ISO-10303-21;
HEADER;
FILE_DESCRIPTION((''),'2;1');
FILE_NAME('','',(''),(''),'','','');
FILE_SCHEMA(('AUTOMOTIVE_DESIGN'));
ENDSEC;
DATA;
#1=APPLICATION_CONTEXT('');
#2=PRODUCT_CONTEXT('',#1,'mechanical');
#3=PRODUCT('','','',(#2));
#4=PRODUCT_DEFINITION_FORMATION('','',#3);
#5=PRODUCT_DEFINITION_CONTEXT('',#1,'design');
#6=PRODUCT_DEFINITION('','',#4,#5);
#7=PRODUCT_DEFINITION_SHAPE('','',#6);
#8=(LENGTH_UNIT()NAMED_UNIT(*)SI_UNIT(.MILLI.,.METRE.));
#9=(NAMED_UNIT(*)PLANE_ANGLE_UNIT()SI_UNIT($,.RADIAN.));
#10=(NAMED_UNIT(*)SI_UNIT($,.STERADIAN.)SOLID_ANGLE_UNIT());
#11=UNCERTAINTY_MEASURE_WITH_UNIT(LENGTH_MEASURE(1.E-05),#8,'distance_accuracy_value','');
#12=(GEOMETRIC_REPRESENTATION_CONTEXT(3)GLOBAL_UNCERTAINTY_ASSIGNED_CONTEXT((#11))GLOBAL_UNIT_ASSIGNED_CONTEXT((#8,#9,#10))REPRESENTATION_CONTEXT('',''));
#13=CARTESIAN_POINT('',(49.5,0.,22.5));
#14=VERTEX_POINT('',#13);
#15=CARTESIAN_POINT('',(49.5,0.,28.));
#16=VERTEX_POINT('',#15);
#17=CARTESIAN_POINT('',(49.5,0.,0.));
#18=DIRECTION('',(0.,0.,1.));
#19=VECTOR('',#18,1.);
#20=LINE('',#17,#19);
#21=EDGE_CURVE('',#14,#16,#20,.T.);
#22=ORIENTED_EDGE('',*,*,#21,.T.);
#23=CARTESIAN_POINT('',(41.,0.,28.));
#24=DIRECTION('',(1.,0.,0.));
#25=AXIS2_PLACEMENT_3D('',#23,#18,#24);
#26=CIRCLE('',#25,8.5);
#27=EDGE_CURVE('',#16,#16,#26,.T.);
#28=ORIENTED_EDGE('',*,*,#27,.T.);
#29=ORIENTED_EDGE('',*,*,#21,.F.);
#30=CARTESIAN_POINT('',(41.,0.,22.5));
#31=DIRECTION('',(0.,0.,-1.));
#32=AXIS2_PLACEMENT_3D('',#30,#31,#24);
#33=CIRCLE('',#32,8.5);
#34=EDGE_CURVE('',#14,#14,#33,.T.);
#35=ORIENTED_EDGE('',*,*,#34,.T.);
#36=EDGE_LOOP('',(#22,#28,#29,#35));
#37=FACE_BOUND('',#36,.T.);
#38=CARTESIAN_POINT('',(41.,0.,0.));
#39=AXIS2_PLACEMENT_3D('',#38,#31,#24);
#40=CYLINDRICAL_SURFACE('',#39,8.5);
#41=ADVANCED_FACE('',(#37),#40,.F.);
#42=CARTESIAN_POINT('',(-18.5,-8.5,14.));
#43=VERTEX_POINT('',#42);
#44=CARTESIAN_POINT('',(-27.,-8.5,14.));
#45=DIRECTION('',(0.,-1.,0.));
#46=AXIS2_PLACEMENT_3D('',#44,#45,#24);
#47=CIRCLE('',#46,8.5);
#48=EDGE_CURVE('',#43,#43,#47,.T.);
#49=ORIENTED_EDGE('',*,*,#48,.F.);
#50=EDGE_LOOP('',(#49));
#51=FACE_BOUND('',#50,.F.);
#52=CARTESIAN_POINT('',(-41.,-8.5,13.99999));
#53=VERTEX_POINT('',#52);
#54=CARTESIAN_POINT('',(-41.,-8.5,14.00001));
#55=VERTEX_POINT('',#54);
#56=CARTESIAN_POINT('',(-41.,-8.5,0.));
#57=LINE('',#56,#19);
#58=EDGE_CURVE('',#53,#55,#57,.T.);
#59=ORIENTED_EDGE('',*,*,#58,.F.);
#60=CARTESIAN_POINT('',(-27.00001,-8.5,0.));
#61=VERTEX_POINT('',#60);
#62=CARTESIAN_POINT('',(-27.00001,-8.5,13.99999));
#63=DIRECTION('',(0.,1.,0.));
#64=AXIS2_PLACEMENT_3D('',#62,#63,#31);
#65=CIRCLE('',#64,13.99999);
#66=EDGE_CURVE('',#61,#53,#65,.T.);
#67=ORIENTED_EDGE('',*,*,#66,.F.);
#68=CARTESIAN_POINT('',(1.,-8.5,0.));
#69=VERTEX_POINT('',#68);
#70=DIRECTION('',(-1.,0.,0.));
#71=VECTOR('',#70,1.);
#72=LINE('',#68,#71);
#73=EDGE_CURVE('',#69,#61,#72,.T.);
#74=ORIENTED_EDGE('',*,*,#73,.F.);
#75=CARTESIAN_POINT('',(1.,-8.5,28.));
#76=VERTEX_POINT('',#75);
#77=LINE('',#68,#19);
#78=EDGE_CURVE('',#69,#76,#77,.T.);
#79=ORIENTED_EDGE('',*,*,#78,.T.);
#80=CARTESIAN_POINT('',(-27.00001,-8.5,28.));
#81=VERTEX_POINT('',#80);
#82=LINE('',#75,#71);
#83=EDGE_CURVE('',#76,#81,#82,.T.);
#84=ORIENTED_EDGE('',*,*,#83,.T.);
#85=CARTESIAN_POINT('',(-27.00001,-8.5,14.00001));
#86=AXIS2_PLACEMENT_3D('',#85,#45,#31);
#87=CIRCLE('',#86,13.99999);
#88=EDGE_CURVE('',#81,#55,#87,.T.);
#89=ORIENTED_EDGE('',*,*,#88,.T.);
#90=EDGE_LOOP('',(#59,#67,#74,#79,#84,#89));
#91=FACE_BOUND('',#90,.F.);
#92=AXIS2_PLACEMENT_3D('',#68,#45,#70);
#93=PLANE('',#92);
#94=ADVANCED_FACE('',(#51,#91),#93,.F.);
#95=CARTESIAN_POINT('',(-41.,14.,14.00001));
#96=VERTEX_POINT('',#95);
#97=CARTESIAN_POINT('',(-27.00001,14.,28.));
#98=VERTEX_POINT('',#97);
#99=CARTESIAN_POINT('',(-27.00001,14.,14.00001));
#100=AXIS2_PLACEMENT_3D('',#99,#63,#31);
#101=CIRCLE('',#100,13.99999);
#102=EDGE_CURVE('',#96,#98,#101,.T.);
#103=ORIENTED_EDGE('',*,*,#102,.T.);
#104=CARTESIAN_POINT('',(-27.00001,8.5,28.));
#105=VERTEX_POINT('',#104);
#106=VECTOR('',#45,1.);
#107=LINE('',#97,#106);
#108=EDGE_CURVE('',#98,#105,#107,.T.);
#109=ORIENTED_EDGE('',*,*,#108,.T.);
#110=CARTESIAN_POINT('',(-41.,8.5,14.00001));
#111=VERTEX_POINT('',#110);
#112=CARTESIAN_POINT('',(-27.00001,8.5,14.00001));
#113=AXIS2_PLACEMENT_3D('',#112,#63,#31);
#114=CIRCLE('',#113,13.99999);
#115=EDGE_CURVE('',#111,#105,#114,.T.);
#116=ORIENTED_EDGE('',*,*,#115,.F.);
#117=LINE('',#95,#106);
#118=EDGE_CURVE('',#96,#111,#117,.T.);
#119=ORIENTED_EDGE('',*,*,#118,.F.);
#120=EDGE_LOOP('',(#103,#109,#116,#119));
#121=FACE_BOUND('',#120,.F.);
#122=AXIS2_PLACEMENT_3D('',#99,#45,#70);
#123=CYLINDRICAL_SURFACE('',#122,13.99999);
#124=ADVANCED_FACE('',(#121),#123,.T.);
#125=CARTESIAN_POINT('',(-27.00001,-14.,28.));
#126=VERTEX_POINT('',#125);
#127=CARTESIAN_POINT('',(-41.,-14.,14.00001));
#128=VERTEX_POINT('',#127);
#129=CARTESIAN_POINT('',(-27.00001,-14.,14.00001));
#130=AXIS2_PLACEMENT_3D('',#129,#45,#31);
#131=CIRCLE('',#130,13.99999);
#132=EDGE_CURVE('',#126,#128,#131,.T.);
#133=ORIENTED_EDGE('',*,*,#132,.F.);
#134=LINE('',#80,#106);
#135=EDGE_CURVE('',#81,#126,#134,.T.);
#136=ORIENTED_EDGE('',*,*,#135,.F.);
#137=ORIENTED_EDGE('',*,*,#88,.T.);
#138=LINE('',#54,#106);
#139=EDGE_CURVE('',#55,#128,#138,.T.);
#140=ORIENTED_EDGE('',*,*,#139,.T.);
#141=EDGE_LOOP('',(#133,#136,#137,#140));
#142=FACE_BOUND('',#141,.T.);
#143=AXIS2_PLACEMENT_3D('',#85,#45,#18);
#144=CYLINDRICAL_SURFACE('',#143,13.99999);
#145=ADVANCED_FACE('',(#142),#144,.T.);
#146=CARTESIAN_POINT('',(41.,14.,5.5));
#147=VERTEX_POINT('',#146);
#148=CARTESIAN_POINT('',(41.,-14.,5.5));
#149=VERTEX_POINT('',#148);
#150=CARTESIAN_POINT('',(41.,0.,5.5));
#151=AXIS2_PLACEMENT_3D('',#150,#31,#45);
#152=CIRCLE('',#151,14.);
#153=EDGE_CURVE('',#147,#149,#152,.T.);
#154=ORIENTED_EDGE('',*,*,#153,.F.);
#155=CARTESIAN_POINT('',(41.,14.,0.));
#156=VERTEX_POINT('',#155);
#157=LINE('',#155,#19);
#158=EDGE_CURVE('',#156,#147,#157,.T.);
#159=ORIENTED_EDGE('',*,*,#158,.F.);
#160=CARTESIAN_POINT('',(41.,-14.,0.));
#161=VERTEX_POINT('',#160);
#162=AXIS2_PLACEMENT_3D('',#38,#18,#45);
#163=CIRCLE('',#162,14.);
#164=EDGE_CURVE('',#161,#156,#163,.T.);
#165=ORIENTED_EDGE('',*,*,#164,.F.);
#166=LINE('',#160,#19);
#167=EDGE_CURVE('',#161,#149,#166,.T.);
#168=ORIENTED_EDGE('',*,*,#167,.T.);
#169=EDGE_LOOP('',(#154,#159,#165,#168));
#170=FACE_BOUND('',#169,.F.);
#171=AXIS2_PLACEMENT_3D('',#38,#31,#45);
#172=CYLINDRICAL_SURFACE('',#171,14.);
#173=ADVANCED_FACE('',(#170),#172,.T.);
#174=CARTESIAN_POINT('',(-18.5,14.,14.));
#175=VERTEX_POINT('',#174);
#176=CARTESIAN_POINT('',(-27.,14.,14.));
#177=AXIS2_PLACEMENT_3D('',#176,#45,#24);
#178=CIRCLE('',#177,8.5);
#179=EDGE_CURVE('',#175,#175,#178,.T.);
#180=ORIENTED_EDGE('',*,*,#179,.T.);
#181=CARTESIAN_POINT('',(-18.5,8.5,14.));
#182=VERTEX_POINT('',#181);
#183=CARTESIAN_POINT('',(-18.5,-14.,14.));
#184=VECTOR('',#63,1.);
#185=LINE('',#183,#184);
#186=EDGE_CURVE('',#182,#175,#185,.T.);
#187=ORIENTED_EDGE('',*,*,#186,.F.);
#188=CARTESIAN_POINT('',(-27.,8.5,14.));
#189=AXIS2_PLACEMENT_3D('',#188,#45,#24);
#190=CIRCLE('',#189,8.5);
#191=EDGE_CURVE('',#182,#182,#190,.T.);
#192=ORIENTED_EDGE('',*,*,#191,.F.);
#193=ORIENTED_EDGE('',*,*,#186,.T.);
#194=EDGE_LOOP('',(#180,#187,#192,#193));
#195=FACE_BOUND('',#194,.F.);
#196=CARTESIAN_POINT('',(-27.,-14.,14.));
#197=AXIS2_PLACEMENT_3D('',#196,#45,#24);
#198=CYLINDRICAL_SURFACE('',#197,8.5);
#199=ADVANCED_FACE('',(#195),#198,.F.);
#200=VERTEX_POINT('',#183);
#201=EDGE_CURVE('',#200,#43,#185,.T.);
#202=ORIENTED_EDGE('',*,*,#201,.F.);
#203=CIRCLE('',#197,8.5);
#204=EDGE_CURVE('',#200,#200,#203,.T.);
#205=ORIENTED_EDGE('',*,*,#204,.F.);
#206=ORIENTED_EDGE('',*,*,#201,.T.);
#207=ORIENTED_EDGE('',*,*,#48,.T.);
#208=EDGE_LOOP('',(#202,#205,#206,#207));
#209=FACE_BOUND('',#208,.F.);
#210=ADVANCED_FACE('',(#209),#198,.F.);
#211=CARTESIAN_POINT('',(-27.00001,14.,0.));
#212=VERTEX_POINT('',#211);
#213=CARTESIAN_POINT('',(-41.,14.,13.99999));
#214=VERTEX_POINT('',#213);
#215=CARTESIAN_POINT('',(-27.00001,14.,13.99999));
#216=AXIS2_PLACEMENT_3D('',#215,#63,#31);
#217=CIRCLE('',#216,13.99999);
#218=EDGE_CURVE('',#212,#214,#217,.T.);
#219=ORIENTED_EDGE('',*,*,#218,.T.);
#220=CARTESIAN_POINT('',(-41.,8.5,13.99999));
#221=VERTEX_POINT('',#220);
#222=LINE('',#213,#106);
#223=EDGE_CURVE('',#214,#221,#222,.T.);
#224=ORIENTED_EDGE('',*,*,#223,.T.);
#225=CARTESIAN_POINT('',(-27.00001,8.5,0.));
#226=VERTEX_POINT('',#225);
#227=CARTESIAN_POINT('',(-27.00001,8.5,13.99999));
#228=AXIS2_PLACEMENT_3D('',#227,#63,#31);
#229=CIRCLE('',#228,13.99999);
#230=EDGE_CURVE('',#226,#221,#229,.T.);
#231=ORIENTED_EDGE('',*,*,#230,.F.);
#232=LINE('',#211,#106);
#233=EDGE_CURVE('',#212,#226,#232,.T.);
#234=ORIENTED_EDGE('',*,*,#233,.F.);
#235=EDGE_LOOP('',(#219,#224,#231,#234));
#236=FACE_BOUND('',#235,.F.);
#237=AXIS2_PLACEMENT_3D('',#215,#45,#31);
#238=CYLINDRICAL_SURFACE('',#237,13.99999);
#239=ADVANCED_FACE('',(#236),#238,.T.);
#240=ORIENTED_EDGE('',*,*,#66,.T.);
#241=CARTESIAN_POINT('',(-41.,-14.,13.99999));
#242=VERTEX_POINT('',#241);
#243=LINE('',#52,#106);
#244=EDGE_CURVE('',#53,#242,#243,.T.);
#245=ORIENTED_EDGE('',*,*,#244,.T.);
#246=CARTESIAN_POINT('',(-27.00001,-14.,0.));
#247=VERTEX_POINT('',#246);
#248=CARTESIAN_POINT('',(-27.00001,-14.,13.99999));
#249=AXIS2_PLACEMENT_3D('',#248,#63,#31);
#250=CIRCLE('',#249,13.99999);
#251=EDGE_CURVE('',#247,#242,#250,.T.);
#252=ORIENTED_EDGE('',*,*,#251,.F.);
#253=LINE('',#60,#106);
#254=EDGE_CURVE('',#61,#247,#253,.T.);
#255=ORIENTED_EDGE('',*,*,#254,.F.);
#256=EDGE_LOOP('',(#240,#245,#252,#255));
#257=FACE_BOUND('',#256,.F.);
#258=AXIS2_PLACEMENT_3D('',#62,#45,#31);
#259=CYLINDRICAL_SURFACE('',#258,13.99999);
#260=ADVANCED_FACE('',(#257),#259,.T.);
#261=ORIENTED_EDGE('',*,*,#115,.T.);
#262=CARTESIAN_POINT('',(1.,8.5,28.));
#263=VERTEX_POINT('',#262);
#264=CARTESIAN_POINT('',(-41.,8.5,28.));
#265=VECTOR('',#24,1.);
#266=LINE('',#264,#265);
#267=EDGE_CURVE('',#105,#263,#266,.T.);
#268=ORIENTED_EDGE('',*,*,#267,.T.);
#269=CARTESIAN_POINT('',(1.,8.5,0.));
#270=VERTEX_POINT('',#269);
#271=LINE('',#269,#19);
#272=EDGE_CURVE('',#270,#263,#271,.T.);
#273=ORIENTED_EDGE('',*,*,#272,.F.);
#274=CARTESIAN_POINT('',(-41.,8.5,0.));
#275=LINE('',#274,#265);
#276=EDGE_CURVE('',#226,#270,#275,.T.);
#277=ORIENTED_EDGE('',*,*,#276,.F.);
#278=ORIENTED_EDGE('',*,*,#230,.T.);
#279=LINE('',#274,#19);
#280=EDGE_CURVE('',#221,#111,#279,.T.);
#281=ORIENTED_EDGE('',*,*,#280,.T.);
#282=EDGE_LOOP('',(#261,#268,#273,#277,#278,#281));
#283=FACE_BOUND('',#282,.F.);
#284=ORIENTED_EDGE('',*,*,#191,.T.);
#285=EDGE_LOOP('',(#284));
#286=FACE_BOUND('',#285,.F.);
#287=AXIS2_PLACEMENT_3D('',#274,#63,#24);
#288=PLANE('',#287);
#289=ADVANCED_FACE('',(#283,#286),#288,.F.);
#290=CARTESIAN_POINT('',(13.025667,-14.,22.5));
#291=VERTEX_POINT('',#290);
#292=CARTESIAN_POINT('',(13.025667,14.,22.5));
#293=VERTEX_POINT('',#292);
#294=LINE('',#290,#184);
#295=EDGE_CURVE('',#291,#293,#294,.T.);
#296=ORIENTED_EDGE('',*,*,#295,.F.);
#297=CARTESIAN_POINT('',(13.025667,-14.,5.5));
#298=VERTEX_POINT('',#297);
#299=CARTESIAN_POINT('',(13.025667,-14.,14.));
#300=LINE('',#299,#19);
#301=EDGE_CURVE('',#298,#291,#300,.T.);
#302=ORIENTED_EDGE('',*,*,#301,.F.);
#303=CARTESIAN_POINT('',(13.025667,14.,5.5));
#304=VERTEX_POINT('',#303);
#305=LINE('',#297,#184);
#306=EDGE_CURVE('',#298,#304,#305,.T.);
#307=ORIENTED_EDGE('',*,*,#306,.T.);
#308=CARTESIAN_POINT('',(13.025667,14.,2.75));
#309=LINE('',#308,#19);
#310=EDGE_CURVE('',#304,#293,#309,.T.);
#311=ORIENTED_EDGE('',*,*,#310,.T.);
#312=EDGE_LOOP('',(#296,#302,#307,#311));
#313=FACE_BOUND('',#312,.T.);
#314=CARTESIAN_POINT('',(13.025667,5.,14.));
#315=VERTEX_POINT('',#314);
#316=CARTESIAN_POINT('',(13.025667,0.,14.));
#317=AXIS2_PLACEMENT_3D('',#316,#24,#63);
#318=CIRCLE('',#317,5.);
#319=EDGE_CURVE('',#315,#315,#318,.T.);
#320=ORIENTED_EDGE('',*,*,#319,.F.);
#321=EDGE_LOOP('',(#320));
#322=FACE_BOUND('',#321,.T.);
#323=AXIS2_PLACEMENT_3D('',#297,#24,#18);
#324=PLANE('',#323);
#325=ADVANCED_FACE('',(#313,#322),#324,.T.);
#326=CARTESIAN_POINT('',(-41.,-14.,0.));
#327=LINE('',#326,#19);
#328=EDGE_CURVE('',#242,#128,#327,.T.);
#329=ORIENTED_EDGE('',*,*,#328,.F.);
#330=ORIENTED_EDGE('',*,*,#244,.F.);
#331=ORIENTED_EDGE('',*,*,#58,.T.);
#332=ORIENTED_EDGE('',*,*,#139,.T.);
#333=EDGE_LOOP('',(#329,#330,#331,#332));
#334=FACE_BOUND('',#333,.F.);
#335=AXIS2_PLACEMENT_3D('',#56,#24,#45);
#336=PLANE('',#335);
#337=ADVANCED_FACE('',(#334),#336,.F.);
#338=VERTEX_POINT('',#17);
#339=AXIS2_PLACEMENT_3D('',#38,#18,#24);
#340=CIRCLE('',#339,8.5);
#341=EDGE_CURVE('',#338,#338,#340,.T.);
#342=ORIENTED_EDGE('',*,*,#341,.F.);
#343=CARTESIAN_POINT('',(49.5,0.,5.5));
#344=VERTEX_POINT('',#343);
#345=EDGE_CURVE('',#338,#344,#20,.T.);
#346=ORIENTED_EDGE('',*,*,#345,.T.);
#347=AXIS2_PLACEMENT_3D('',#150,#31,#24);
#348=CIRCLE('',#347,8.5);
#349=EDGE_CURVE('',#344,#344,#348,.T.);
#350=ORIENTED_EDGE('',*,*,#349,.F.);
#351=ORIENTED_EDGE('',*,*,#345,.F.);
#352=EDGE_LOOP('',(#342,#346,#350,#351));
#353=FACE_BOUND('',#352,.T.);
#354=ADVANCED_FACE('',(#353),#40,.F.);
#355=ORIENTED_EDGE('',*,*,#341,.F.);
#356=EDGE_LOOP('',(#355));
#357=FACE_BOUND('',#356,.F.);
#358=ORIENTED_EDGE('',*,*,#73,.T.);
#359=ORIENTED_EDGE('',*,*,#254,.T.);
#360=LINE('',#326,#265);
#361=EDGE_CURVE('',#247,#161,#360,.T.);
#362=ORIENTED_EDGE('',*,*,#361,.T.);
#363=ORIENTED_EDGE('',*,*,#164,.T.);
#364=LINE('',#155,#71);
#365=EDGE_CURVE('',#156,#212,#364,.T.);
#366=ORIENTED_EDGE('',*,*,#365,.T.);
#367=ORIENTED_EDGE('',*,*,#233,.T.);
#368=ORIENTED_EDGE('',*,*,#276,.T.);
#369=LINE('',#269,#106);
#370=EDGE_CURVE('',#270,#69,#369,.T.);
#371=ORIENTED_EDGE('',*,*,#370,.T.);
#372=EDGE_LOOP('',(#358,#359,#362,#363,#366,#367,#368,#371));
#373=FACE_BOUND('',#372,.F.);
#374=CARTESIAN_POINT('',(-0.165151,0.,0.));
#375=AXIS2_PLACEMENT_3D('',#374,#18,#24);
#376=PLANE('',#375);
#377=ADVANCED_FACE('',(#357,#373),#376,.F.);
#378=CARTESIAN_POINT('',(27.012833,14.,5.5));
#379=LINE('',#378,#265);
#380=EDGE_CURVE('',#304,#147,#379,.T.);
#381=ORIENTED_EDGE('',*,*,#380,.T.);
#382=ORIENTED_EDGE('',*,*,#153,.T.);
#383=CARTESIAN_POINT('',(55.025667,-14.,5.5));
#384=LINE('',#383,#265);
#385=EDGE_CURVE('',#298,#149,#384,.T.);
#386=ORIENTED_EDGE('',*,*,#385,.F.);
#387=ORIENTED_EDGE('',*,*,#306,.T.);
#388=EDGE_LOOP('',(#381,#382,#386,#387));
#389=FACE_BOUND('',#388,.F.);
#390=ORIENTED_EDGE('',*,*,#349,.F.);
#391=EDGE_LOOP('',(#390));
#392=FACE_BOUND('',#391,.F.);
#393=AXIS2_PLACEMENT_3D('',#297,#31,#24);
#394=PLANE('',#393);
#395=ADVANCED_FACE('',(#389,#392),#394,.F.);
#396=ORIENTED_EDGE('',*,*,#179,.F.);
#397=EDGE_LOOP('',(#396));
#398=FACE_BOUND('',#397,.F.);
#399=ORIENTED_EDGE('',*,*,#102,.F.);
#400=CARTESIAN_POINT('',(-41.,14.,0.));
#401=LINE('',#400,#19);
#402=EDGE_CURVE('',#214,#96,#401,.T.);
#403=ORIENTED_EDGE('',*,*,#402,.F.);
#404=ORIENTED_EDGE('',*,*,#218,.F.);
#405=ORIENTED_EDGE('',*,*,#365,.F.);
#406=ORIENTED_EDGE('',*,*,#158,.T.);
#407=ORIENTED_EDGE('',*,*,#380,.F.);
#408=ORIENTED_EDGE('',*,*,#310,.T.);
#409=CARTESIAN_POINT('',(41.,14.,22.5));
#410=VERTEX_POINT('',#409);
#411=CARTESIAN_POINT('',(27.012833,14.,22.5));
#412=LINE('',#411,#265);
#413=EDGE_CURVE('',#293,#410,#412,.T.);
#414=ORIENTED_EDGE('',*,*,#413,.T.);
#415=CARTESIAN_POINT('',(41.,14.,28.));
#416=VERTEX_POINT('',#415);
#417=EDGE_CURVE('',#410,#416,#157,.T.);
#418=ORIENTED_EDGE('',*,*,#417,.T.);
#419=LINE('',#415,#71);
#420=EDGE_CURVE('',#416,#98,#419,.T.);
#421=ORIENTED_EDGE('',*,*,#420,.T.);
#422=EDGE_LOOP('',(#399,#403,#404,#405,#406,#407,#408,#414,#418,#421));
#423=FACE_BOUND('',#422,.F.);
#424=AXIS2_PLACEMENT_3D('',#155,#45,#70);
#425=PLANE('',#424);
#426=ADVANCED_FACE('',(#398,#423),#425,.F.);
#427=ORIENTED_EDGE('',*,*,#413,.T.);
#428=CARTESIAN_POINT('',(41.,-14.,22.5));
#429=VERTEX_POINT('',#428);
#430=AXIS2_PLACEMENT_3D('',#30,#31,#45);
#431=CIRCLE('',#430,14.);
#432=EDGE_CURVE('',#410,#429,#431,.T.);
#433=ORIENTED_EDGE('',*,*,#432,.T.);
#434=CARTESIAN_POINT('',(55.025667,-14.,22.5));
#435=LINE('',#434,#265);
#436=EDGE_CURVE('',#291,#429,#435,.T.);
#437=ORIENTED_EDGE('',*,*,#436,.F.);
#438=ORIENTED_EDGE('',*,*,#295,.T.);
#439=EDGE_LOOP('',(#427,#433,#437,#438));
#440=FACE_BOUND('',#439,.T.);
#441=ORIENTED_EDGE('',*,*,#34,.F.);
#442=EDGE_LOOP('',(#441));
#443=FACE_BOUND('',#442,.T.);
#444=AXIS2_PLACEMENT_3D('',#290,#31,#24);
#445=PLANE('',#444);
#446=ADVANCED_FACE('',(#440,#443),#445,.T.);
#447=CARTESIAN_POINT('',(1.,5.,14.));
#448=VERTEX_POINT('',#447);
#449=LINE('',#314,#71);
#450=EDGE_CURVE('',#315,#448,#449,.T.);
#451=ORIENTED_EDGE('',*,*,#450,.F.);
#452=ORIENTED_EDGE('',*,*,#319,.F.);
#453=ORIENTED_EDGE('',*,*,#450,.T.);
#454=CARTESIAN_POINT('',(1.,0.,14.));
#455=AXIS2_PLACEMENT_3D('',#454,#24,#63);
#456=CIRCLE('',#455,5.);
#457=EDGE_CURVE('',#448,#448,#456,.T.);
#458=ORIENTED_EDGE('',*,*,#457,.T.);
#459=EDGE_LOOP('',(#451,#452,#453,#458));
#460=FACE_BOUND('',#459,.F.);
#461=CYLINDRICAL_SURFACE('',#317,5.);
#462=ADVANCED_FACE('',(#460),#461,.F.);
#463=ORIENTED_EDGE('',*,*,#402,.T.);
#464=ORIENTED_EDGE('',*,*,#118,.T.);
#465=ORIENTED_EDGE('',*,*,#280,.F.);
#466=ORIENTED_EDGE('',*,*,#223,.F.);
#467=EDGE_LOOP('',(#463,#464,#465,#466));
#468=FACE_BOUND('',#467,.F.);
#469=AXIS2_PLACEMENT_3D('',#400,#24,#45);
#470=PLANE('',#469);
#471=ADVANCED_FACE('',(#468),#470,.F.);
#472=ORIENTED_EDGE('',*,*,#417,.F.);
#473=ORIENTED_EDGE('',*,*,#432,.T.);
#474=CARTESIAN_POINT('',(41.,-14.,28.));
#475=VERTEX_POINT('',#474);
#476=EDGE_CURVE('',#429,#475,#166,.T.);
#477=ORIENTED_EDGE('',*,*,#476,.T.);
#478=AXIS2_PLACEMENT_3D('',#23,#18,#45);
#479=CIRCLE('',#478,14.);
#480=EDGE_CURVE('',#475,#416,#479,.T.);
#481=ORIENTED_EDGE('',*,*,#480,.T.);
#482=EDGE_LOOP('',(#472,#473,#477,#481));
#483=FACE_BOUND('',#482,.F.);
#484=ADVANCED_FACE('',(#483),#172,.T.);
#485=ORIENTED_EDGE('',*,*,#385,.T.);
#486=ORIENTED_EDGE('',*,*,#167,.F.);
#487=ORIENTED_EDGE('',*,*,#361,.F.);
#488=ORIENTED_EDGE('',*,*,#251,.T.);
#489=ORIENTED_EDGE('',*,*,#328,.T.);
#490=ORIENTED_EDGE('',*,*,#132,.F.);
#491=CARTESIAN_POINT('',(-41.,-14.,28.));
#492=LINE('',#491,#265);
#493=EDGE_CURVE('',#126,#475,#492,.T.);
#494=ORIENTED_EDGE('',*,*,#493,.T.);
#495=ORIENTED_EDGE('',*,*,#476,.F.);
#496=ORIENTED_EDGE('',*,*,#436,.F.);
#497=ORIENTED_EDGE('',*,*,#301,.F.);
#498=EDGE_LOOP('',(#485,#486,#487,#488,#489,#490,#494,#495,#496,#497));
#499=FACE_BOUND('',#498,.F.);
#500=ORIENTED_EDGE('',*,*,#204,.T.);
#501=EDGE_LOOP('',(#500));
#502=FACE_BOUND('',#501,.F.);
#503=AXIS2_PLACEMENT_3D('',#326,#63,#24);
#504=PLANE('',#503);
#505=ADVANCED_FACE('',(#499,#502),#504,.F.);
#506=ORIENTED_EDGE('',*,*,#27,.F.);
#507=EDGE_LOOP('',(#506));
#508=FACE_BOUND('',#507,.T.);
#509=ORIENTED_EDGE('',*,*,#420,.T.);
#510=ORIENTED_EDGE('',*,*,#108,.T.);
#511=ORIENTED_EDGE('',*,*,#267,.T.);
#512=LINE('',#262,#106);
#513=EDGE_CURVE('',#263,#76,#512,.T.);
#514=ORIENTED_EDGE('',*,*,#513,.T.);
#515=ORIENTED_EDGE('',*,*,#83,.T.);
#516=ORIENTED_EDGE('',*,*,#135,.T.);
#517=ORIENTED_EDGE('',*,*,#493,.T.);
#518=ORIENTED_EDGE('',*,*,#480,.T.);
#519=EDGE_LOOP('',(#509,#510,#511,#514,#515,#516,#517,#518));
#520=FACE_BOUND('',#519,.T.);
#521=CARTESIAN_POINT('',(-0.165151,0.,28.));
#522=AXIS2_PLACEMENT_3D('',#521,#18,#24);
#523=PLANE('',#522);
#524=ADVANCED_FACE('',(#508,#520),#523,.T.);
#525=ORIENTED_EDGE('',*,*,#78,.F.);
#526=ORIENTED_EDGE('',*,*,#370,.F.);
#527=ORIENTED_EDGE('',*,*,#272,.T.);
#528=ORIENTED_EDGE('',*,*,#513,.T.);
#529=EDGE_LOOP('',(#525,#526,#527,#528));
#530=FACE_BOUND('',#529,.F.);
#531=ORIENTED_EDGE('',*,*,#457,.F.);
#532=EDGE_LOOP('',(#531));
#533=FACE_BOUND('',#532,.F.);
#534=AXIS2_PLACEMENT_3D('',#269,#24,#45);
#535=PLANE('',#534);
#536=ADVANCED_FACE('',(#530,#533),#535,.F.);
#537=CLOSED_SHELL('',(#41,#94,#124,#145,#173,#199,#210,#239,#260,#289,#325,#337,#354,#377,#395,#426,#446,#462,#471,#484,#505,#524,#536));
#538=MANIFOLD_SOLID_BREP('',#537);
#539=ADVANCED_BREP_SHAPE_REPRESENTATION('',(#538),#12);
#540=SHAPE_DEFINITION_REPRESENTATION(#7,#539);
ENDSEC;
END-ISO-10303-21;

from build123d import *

# Parameters (mm, degrees)
F0_R     = 8.5
F1_DEPTH = 28
F2_R     = 8.5
F2_W     = 84
F2_H     = 17
F3_DEPTH = 28.001
F4_R     = 13.99999
F5_R     = 5
F6_DEPTH = 54.0266669521


# Not quite as in the source:
# - a fillet or chamfer is up to 0.001 mm smaller than in the source, because OpenCascade refuses the exact size


with BuildPart() as f1:
    # F0 (on Top) → F1 (new body)
    with BuildSketch(Plane.XY):
        with BuildLine():
            Line((41, 14), (-41, 14))
            Line((-41, 14), (-41, 8.5))
            Line((-41, 8.5), (1, 8.5))
            Line((1, 8.5), (1, -8.5))
            Line((1, -8.5), (-41, -8.5))
            Line((-41, -8.5), (-41, -14))
            Line((-41, -14), (41, -14))
            ThreePointArc((41, -14), (55, 0), (41, 14))
        make_face()
        with Locations((41, 0)):
            Circle(F0_R, mode=Mode.SUBTRACT)
    extrude(amount=F1_DEPTH)

    # F2 (on face) → F3 (cut, through all)
    with BuildSketch(Plane.XZ.offset(14)):
        with Locations((-27, 14)):
            Circle(F2_R)
        with Locations((55.0256669521, 14)):
            Rectangle(F2_W, F2_H)
    extrude(amount=-F3_DEPTH, mode=Mode.SUBTRACT)

    # F4 (radius 14 in the source; OpenCascade refuses exactly that, so slightly less here)
    f4_edges = [f1.edges().sort_by_distance(p)[0] for p in [
        (-41, 11.25, 28),
        (-41, 11.25, 0),
        (-41, -11.25, 28),
        (-41, -11.25, 0),
    ]]
    fillet(f4_edges, radius=F4_R)

    # F5 (on face) → F6 (cut, through all)
    with BuildSketch(Plane.YZ.offset(13.0256669521)):
        with Locations((0, 14)):
            Circle(F5_R)
    extrude(amount=-F6_DEPTH, mode=Mode.SUBTRACT)


solid = f1.part
